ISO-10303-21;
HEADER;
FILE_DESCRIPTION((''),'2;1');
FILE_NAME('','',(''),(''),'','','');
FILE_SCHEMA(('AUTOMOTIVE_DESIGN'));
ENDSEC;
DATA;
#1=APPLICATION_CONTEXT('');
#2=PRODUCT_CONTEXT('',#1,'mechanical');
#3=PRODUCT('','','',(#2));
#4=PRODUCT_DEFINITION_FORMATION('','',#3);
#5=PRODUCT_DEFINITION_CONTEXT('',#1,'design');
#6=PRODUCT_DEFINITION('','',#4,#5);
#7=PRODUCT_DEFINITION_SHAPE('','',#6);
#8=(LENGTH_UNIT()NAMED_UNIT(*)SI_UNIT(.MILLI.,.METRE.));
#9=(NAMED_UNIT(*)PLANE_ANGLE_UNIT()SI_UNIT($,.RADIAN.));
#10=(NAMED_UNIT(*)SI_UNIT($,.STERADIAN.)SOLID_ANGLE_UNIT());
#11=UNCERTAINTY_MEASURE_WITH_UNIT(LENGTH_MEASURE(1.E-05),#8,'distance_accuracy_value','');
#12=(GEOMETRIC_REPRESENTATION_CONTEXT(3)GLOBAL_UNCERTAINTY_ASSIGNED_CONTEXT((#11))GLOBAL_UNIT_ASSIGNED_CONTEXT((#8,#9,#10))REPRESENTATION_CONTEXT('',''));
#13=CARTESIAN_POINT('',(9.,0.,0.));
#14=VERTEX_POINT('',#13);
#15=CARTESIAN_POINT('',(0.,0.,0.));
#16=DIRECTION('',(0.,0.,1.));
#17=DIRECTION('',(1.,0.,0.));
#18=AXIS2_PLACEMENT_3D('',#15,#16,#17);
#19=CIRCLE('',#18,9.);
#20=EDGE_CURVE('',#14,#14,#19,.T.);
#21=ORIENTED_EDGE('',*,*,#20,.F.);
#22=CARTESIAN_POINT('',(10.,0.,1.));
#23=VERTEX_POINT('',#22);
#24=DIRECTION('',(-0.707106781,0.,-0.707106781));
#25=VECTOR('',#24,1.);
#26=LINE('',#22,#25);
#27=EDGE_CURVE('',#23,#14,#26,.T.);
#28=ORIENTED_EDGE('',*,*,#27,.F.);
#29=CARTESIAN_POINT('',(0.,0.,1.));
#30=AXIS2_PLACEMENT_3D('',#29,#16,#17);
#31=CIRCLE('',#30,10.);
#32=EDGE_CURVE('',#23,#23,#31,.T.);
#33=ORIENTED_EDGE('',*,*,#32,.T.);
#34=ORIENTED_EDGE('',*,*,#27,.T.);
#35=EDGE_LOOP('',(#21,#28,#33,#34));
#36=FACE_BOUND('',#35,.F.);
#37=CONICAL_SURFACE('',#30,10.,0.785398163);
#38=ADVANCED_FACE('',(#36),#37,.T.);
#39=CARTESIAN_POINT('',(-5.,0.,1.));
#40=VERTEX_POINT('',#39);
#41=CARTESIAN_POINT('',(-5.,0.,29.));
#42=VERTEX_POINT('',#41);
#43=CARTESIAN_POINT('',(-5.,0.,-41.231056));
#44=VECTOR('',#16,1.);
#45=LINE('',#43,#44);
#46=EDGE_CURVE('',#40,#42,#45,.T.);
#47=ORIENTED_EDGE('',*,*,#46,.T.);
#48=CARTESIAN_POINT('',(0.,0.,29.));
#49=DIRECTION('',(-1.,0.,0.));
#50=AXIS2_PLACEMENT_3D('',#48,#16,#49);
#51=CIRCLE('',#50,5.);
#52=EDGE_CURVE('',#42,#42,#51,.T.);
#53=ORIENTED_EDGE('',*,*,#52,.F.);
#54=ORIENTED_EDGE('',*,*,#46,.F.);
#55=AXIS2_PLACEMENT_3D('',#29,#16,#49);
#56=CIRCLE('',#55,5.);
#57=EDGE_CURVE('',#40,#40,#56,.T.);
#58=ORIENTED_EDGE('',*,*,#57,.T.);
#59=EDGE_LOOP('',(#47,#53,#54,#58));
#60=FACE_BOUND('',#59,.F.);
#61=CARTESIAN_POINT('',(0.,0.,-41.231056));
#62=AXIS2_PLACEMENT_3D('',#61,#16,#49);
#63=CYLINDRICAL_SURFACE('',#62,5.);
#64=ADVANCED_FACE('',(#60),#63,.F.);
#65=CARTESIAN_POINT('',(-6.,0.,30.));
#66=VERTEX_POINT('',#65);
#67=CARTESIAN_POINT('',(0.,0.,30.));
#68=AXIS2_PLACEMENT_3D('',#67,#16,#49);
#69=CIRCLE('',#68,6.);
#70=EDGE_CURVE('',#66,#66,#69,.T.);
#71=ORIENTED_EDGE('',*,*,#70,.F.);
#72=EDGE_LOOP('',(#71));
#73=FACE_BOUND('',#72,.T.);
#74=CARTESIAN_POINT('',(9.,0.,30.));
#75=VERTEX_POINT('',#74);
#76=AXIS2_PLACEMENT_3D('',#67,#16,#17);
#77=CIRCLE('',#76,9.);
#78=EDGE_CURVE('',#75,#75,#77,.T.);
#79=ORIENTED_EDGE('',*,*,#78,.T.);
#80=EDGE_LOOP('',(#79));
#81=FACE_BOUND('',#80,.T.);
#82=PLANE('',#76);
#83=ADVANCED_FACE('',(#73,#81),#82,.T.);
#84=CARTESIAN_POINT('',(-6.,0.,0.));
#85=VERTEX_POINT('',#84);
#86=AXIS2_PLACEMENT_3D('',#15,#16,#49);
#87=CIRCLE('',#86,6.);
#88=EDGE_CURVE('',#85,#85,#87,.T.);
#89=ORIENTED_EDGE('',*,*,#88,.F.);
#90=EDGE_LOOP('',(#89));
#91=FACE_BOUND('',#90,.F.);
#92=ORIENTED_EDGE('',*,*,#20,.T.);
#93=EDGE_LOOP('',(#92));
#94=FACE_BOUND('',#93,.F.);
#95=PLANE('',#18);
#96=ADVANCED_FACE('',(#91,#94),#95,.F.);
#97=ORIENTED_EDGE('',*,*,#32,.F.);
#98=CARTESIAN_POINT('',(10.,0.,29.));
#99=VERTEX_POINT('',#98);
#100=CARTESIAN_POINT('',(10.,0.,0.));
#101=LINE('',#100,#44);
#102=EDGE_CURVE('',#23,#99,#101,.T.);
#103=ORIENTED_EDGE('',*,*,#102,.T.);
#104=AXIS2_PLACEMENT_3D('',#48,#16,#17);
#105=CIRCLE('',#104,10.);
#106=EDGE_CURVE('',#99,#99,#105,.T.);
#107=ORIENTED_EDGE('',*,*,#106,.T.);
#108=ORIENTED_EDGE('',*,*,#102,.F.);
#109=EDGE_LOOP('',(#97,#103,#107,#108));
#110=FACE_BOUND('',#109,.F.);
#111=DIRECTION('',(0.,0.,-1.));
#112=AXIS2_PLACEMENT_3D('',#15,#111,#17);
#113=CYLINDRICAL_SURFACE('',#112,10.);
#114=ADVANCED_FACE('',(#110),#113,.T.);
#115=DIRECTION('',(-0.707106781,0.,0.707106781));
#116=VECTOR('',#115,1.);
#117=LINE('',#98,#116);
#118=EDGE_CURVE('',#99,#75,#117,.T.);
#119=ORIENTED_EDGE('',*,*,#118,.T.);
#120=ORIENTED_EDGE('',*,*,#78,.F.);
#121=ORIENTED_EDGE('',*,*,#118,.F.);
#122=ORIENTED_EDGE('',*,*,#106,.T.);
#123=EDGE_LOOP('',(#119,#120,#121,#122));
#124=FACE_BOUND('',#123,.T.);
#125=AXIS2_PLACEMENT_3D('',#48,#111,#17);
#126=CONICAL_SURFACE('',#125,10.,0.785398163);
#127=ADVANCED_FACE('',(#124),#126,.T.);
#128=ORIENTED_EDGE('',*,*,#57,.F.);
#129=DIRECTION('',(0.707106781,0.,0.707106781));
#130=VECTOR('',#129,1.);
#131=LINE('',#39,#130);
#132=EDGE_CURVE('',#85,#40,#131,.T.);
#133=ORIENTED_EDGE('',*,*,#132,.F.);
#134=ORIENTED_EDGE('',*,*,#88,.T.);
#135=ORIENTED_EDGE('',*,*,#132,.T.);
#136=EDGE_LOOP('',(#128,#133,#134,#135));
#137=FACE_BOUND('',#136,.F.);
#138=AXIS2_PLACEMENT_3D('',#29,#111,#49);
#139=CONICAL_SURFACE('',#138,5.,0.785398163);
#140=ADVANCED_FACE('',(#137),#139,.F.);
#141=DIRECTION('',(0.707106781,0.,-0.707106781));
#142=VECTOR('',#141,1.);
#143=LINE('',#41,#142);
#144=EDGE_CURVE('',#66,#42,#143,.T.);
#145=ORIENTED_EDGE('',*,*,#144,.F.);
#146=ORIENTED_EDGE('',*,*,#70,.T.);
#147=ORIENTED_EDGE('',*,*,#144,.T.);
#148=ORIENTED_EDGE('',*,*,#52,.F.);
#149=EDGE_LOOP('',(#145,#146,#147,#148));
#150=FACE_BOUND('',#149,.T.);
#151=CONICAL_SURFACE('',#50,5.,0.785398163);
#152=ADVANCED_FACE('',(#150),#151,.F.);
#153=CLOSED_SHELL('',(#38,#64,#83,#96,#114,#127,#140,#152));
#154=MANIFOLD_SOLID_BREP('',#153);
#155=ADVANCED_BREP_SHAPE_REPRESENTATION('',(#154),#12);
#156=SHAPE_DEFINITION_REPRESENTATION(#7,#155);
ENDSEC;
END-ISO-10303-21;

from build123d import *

# Parameters (mm, degrees)
F0_R     = 10
F1_DEPTH = 30
F3_D     = 10
F4_SIZE  = 1


with BuildPart() as f1:
    # F0 (on Top) → F1 (new body)
    with BuildSketch(Plane.XY):
        Circle(F0_R)
    extrude(amount=F1_DEPTH)

    # F3 (through all)
    with Locations(Plane(origin=(0, 0, 0), x_dir=(1, 0, 0), z_dir=(0, 0, -1))):
        with Locations((0, 0)):
            Hole(F3_D / 2)

    # F4
    f4_edges = [f1.edges().sort_by_distance(p)[0] for p in [
        (10, 0, 15),
        (-10, 0, 0),
        (-10, 0, 30),
        (-5, 0, 0),
        (-5, 0, 30),
    ]]
    chamfer(f4_edges, length=F4_SIZE)


solid = f1.part
